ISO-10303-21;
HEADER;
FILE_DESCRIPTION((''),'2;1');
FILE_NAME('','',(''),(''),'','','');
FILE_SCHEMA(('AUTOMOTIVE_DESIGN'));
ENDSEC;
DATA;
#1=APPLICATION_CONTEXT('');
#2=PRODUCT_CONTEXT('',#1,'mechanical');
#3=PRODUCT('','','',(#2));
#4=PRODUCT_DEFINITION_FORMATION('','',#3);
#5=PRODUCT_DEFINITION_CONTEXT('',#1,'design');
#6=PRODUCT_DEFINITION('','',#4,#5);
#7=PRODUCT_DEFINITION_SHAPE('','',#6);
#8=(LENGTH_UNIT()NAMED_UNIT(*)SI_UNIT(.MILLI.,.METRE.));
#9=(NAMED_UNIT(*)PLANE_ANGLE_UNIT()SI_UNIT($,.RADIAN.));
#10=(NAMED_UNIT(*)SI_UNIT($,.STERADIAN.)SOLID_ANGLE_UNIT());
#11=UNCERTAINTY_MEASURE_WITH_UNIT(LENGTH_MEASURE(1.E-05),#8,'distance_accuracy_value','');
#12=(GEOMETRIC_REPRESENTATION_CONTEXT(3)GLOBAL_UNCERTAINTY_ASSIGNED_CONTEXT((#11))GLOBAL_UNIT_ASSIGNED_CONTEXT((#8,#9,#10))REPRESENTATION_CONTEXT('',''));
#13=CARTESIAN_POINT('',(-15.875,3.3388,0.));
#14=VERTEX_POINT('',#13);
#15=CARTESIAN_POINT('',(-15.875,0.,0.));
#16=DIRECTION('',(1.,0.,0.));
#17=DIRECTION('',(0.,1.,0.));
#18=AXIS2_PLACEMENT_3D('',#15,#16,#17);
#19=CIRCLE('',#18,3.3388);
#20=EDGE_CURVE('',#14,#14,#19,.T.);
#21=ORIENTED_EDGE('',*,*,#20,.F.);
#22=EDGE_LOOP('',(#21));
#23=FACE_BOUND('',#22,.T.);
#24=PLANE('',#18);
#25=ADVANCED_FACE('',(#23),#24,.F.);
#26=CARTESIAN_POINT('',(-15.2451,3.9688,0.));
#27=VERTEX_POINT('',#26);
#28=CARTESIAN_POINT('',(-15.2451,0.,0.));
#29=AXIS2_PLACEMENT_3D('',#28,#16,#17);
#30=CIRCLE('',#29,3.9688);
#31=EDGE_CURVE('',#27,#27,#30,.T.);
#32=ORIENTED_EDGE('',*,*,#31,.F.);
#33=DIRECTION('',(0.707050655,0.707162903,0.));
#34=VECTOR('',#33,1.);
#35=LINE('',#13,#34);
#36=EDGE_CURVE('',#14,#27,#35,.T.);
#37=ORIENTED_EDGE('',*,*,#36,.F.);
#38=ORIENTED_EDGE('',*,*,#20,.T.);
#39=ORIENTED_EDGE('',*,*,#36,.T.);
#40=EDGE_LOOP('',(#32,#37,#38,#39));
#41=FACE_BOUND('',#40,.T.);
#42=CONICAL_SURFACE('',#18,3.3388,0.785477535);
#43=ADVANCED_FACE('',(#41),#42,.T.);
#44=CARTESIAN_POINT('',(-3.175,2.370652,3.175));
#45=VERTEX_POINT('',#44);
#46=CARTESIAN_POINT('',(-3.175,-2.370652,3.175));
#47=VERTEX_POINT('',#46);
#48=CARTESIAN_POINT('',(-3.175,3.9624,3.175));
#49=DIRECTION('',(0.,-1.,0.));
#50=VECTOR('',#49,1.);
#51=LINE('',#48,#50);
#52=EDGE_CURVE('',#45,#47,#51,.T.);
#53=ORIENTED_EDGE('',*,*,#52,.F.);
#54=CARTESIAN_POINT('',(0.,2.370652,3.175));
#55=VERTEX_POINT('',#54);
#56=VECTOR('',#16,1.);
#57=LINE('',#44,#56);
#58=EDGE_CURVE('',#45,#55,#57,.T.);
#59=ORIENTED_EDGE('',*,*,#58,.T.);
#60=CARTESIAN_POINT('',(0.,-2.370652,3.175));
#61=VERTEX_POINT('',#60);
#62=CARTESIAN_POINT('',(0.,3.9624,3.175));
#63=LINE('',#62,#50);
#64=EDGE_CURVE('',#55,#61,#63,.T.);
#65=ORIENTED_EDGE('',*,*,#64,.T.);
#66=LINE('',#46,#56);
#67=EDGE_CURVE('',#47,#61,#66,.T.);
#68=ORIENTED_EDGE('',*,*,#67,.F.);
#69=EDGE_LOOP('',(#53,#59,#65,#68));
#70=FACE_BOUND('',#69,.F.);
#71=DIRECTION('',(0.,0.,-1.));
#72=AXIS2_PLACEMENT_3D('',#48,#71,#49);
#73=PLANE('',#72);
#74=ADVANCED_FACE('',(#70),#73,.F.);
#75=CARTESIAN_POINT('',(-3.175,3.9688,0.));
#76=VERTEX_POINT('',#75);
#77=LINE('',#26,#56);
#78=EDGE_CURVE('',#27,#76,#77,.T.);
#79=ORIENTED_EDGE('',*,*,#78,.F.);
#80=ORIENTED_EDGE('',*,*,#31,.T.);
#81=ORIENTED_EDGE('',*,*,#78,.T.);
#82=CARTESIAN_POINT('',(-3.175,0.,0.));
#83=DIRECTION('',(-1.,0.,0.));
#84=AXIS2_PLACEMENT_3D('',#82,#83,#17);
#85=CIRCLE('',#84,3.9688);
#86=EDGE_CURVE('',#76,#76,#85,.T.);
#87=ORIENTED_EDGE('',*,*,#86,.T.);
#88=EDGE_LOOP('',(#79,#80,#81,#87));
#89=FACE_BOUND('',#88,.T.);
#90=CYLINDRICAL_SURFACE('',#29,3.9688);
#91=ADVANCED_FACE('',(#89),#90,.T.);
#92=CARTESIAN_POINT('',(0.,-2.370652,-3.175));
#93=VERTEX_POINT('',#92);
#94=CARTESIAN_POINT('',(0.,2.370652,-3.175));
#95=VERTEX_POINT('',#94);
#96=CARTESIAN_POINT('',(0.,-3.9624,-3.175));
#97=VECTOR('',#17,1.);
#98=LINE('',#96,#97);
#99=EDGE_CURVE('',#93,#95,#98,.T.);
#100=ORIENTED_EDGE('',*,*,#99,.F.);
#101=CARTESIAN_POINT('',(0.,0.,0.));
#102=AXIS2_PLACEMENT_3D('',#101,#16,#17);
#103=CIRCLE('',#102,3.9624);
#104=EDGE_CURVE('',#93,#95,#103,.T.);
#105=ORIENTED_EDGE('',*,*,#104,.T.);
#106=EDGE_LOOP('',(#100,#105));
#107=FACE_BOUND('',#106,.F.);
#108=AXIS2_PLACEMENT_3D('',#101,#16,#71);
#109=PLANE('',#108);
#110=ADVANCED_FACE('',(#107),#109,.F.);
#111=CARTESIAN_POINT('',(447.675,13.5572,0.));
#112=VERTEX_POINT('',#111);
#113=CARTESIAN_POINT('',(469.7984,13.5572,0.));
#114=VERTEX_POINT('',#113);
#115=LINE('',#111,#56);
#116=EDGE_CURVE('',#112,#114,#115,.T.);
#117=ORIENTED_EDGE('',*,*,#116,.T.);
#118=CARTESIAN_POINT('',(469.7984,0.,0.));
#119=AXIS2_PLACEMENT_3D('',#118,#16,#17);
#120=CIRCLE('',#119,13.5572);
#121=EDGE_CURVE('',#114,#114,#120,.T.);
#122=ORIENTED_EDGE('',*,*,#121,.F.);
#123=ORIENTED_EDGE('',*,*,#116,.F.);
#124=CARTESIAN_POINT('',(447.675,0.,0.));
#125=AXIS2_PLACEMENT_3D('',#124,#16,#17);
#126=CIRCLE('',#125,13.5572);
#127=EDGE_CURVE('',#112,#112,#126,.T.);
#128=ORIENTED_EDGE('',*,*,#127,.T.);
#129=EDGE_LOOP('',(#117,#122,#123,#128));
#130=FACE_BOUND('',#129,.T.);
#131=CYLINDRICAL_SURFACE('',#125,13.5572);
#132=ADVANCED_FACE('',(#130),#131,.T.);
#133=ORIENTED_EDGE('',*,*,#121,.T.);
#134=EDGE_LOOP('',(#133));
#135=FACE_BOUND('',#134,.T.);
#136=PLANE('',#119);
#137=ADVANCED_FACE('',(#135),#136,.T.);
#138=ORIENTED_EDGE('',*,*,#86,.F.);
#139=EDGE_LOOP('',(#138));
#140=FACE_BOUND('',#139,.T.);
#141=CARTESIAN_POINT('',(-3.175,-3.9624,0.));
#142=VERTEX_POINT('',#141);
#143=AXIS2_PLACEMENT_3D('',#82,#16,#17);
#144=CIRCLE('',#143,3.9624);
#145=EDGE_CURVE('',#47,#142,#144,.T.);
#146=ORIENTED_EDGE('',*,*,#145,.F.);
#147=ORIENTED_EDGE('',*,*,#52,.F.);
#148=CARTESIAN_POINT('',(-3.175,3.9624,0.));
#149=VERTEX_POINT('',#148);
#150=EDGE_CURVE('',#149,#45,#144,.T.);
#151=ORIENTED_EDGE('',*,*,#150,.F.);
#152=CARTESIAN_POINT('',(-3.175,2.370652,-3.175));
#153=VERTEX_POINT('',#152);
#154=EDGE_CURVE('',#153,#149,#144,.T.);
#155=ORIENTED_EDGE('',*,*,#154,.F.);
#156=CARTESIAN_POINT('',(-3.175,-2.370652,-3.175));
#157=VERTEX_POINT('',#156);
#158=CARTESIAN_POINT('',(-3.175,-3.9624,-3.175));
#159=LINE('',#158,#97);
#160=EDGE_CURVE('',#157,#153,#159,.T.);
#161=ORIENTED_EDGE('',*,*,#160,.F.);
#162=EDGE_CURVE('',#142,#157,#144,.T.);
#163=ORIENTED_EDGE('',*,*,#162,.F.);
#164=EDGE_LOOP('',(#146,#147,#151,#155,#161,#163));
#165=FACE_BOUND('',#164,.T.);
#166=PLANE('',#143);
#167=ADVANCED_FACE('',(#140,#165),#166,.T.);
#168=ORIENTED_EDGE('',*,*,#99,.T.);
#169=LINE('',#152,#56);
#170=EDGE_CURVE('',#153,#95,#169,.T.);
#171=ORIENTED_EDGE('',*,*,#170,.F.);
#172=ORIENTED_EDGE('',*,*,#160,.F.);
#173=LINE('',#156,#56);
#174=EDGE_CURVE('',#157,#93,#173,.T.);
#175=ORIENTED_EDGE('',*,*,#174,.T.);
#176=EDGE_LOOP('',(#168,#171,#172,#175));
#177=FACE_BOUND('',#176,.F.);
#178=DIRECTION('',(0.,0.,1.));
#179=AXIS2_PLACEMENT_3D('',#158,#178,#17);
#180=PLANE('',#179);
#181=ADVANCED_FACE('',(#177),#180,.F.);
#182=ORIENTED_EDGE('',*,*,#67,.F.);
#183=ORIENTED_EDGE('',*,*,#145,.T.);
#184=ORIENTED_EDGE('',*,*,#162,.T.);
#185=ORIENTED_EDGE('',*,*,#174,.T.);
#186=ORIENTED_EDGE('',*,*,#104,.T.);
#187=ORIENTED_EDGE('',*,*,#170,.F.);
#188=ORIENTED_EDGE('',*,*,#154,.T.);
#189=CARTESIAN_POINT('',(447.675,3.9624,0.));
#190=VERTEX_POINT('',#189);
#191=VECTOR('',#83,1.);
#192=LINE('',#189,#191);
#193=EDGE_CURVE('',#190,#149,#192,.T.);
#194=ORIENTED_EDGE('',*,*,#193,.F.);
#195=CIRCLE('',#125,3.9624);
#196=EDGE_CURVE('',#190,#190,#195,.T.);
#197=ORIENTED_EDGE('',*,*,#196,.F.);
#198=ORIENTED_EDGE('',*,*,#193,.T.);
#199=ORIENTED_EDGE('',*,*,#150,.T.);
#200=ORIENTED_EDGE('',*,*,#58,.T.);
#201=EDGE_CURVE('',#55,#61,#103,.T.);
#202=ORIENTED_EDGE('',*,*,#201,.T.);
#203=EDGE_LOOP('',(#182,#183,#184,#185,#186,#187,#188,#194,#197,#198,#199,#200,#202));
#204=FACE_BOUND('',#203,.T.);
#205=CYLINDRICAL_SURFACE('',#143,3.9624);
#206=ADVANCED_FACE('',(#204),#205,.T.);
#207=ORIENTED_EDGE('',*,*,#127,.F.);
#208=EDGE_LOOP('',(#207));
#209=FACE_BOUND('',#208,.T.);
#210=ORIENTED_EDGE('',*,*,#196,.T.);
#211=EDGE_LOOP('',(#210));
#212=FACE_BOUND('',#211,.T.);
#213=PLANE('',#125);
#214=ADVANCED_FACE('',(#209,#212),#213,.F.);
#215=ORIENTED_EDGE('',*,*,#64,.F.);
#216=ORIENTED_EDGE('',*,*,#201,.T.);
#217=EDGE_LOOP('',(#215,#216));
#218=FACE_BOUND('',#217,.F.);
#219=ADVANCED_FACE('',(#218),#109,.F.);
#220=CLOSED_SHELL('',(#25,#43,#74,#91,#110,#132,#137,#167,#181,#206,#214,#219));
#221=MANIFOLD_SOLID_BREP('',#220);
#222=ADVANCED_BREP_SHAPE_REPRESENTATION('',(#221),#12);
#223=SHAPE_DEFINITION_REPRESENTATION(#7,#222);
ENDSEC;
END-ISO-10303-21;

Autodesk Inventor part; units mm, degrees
sketch "Sketch_1" plane through (0, 0, 0) normal (0, 0, 1) x (1, 0, 0)
  line L0 (469.7984, 0) -> (-3.175, 0)
  line L1 (-3.175, 0) -> (-3.175, 3.9624)
  line L2 (-3.175, 3.9624) -> (447.675, 3.9624)
  line L3 (447.675, 3.9624) -> (447.675, 13.5572)
  line L4 (447.675, 13.5572) -> (469.7984, 13.5572)
  line L5 (469.7984, 13.5572) -> (469.7984, 0)
  line L6 (469.7984, 0) -> (-3.175, 0)
revolve "Revolution1" add sketch "Sketch_1" angle 360 about axis through (469.7984, 0, 0) along (1, 0, 0)
sketch "Sketch_3" plane through (0, 0, 0) normal (0, 0, 1) x (1, 0, 0)
  line L0 (-3.175, 0) -> (-15.875, 0)
  line L1 (-15.875, 0) -> (-15.875, 3.3388)
  line L2 (-15.875, 3.3388) -> (-15.2451, 3.9688)
  line L3 (-15.2451, 3.9688) -> (-3.175, 3.9688)
  line L4 (-3.175, 3.9688) -> (-3.175, 0)
  line L5 (-3.175, 0) -> (-15.875, 0)
revolve "Revolution2" add sketch "Sketch_3" angle 360 about axis through (-3.175, 0, 0) along (1, 0, 0)
thread "Thread1" size "5/16-20 UN" class "3A" standard "ANSI Unified Screw Threads" full length
sketch "Sketch_10" plane through (-3.175, 0, 0) normal (1, 0, 0) x (0, 0, -1)
  line L0 (-7.9248, 7.9248) -> (-7.9248, -7.9248)
  line L1 (-7.9248, -7.9248) -> (7.9248, -7.9248)
  line L2 (7.9248, -7.9248) -> (7.9248, 7.9248)
  line L3 (7.9248, 7.9248) -> (-7.9248, 7.9248)
  line L4 (-3.175, 3.9624) -> (-3.175, -3.9624)
  line L5 (-3.175, -3.9624) -> (3.175, -3.9624)
  line L6 (3.175, -3.9624) -> (3.175, 3.9624)
  line L7 (3.175, 3.9624) -> (-3.175, 3.9624)
extrude "Extrusion1" cut sketch "Sketch_10" along normal blind 3.175
ref_plane "rod_cp_XY" through (0, 0, 0) normal (1, 0, 0) x (0, 0, -1)
ref_plane "rod_cp_YZ" through (0, 0, 0) normal (0, 0, -1) x (0, 1, 0)
ref_plane "rod_cp_ZX" through (0, 0, 0) normal (0, 1, 0) x (1, 0, 0)
ref_plane "to_rod_clevis_XY" through (-15.875, 0, 0) normal (1, 0, 0) x (0, 0, -1)
ref_plane "to_rod_clevis_YZ" through (-15.875, 0, 0) normal (0, 0, -1) x (0, 1, 0)
ref_plane "to_rod_clevis_ZX" through (-15.875, 0, 0) normal (0, 1, 0) x (1, 0, 0)
ref_plane "rl2_XY" through (-3.175, 0, 0) normal (1, 0, 0) x (0, 0, -1)
ref_plane "rl2_YZ" through (-3.175, 0, 0) normal (0, 0, -1) x (0, 1, 0)
ref_plane "rl2_ZX" through (-3.175, 0, 0) normal (0, 1, 0) x (1, 0, 0)
ref_plane "rl1_XY" through (-15.875, 0, 0) normal (1, 0, 0) x (0, 0, -1)
ref_plane "rl1_YZ" through (-15.875, 0, 0) normal (0, 0, -1) x (0, 1, 0)
ref_plane "rl1_ZX" through (-15.875, 0, 0) normal (0, 1, 0) x (1, 0, 0)
ref_plane "thd1_XY" through (-15.875, 3.9688, 0) normal (1, 0, 0) x (0, 0, -1)
ref_plane "thd1_YZ" through (-15.875, 3.9688, 0) normal (0, 0, -1) x (0, 1, 0)
ref_plane "thd1_ZX" through (-15.875, 3.9688, 0) normal (0, 1, 0) x (1, 0, 0)
ref_plane "thd2_XY" through (-15.875, -3.9688, 0) normal (1, 0, 0) x (0, 0, -1)
ref_plane "thd2_YZ" through (-15.875, -3.9688, 0) normal (0, 0, -1) x (0, 1, 0)
ref_plane "thd2_ZX" through (-15.875, -3.9688, 0) normal (0, 1, 0) x (1, 0, 0)
ref_plane "dia1_XY" through (-3.175, 3.9624, 0) normal (1, 0, 0) x (0, 0, -1)
ref_plane "dia1_YZ" through (-3.175, 3.9624, 0) normal (0, 0, -1) x (0, 1, 0)
ref_plane "dia1_ZX" through (-3.175, 3.9624, 0) normal (0, 1, 0) x (1, 0, 0)
ref_plane "dia2_XY" through (-3.175, -3.9624, 0) normal (1, 0, 0) x (0, 0, -1)
ref_plane "dia2_YZ" through (-3.175, -3.9624, 0) normal (0, 0, -1) x (0, 1, 0)
ref_plane "dia2_ZX" through (-3.175, -3.9624, 0) normal (0, 1, 0) x (1, 0, 0)
ref_plane "wf1_XY" through (-3.175, 0, 0) normal (1, 0, 0) x (0, 0, -1)
ref_plane "wf1_YZ" through (-3.175, 0, 0) normal (0, 0, -1) x (0, 1, 0)
ref_plane "wf1_ZX" through (-3.175, 0, 0) normal (0, 1, 0) x (1, 0, 0)
ref_plane "wf2_XY" through (0, 0, 0) normal (1, 0, 0) x (0, 0, -1)
ref_plane "wf2_YZ" through (0, 0, 0) normal (0, 0, -1) x (0, 1, 0)
ref_plane "wf2_ZX" through (0, 0, 0) normal (0, 1, 0) x (1, 0, 0)
ref_plane "hh1_XY" through (497.5606, 0, 0) normal (0, 0, 1) x (1, 0, 0)
ref_plane "hh1_YZ" through (497.5606, 0, 0) normal (1, 0, 0) x (0, 1, 0)
ref_plane "hh1_ZX" through (497.5606, 0, 0) normal (0, 1, 0) x (0, 0, 1)
ref_plane "hh2_XY" through (503.9614, 0, 0) normal (0, 0, 1) x (1, 0, 0)
ref_plane "hh2_YZ" through (503.9614, 0, 0) normal (1, 0, 0) x (0, 1, 0)
ref_plane "hh2_ZX" through (503.9614, 0, 0) normal (0, 1, 0) x (0, 0, 1)
ref_plane "dia12_XY" through (0, 0, 14.1351) normal (1, 0, 0) x (0, 0, -1)
ref_plane "dia12_YZ" through (0, 0, 14.1351) normal (0, 0, -1) x (0, 1, 0)
ref_plane "dia12_ZX" through (0, 0, 14.1351) normal (0, 1, 0) x (1, 0, 0)
ref_plane "dia22_XY" through (0, 0, -14.1351) normal (1, 0, 0) x (0, 0, -1)
ref_plane "dia22_YZ" through (0, 0, -14.1351) normal (0, 0, -1) x (0, 1, 0)
ref_plane "dia22_ZX" through (0, 0, -14.1351) normal (0, 1, 0) x (1, 0, 0)
ref_plane "wfw1_XY" through (-3.175, 0, -3.175) normal (0, 1, 0) x (1, 0, 0)
ref_plane "wfw1_YZ" through (-3.175, 0, -3.175) normal (1, 0, 0) x (0, 0, -1)
ref_plane "wfw1_ZX" through (-3.175, 0, -3.175) normal (0, 0, -1) x (0, 1, 0)
ref_plane "wfw2_XY" through (-3.175, 0, 3.175) normal (0, 1, 0) x (1, 0, 0)
ref_plane "wfw2_YZ" through (-3.175, 0, 3.175) normal (1, 0, 0) x (0, 0, -1)
ref_plane "wfw2_ZX" through (-3.175, 0, 3.175) normal (0, 0, -1) x (0, 1, 0)
properties part number "0916-DX0_rod"
